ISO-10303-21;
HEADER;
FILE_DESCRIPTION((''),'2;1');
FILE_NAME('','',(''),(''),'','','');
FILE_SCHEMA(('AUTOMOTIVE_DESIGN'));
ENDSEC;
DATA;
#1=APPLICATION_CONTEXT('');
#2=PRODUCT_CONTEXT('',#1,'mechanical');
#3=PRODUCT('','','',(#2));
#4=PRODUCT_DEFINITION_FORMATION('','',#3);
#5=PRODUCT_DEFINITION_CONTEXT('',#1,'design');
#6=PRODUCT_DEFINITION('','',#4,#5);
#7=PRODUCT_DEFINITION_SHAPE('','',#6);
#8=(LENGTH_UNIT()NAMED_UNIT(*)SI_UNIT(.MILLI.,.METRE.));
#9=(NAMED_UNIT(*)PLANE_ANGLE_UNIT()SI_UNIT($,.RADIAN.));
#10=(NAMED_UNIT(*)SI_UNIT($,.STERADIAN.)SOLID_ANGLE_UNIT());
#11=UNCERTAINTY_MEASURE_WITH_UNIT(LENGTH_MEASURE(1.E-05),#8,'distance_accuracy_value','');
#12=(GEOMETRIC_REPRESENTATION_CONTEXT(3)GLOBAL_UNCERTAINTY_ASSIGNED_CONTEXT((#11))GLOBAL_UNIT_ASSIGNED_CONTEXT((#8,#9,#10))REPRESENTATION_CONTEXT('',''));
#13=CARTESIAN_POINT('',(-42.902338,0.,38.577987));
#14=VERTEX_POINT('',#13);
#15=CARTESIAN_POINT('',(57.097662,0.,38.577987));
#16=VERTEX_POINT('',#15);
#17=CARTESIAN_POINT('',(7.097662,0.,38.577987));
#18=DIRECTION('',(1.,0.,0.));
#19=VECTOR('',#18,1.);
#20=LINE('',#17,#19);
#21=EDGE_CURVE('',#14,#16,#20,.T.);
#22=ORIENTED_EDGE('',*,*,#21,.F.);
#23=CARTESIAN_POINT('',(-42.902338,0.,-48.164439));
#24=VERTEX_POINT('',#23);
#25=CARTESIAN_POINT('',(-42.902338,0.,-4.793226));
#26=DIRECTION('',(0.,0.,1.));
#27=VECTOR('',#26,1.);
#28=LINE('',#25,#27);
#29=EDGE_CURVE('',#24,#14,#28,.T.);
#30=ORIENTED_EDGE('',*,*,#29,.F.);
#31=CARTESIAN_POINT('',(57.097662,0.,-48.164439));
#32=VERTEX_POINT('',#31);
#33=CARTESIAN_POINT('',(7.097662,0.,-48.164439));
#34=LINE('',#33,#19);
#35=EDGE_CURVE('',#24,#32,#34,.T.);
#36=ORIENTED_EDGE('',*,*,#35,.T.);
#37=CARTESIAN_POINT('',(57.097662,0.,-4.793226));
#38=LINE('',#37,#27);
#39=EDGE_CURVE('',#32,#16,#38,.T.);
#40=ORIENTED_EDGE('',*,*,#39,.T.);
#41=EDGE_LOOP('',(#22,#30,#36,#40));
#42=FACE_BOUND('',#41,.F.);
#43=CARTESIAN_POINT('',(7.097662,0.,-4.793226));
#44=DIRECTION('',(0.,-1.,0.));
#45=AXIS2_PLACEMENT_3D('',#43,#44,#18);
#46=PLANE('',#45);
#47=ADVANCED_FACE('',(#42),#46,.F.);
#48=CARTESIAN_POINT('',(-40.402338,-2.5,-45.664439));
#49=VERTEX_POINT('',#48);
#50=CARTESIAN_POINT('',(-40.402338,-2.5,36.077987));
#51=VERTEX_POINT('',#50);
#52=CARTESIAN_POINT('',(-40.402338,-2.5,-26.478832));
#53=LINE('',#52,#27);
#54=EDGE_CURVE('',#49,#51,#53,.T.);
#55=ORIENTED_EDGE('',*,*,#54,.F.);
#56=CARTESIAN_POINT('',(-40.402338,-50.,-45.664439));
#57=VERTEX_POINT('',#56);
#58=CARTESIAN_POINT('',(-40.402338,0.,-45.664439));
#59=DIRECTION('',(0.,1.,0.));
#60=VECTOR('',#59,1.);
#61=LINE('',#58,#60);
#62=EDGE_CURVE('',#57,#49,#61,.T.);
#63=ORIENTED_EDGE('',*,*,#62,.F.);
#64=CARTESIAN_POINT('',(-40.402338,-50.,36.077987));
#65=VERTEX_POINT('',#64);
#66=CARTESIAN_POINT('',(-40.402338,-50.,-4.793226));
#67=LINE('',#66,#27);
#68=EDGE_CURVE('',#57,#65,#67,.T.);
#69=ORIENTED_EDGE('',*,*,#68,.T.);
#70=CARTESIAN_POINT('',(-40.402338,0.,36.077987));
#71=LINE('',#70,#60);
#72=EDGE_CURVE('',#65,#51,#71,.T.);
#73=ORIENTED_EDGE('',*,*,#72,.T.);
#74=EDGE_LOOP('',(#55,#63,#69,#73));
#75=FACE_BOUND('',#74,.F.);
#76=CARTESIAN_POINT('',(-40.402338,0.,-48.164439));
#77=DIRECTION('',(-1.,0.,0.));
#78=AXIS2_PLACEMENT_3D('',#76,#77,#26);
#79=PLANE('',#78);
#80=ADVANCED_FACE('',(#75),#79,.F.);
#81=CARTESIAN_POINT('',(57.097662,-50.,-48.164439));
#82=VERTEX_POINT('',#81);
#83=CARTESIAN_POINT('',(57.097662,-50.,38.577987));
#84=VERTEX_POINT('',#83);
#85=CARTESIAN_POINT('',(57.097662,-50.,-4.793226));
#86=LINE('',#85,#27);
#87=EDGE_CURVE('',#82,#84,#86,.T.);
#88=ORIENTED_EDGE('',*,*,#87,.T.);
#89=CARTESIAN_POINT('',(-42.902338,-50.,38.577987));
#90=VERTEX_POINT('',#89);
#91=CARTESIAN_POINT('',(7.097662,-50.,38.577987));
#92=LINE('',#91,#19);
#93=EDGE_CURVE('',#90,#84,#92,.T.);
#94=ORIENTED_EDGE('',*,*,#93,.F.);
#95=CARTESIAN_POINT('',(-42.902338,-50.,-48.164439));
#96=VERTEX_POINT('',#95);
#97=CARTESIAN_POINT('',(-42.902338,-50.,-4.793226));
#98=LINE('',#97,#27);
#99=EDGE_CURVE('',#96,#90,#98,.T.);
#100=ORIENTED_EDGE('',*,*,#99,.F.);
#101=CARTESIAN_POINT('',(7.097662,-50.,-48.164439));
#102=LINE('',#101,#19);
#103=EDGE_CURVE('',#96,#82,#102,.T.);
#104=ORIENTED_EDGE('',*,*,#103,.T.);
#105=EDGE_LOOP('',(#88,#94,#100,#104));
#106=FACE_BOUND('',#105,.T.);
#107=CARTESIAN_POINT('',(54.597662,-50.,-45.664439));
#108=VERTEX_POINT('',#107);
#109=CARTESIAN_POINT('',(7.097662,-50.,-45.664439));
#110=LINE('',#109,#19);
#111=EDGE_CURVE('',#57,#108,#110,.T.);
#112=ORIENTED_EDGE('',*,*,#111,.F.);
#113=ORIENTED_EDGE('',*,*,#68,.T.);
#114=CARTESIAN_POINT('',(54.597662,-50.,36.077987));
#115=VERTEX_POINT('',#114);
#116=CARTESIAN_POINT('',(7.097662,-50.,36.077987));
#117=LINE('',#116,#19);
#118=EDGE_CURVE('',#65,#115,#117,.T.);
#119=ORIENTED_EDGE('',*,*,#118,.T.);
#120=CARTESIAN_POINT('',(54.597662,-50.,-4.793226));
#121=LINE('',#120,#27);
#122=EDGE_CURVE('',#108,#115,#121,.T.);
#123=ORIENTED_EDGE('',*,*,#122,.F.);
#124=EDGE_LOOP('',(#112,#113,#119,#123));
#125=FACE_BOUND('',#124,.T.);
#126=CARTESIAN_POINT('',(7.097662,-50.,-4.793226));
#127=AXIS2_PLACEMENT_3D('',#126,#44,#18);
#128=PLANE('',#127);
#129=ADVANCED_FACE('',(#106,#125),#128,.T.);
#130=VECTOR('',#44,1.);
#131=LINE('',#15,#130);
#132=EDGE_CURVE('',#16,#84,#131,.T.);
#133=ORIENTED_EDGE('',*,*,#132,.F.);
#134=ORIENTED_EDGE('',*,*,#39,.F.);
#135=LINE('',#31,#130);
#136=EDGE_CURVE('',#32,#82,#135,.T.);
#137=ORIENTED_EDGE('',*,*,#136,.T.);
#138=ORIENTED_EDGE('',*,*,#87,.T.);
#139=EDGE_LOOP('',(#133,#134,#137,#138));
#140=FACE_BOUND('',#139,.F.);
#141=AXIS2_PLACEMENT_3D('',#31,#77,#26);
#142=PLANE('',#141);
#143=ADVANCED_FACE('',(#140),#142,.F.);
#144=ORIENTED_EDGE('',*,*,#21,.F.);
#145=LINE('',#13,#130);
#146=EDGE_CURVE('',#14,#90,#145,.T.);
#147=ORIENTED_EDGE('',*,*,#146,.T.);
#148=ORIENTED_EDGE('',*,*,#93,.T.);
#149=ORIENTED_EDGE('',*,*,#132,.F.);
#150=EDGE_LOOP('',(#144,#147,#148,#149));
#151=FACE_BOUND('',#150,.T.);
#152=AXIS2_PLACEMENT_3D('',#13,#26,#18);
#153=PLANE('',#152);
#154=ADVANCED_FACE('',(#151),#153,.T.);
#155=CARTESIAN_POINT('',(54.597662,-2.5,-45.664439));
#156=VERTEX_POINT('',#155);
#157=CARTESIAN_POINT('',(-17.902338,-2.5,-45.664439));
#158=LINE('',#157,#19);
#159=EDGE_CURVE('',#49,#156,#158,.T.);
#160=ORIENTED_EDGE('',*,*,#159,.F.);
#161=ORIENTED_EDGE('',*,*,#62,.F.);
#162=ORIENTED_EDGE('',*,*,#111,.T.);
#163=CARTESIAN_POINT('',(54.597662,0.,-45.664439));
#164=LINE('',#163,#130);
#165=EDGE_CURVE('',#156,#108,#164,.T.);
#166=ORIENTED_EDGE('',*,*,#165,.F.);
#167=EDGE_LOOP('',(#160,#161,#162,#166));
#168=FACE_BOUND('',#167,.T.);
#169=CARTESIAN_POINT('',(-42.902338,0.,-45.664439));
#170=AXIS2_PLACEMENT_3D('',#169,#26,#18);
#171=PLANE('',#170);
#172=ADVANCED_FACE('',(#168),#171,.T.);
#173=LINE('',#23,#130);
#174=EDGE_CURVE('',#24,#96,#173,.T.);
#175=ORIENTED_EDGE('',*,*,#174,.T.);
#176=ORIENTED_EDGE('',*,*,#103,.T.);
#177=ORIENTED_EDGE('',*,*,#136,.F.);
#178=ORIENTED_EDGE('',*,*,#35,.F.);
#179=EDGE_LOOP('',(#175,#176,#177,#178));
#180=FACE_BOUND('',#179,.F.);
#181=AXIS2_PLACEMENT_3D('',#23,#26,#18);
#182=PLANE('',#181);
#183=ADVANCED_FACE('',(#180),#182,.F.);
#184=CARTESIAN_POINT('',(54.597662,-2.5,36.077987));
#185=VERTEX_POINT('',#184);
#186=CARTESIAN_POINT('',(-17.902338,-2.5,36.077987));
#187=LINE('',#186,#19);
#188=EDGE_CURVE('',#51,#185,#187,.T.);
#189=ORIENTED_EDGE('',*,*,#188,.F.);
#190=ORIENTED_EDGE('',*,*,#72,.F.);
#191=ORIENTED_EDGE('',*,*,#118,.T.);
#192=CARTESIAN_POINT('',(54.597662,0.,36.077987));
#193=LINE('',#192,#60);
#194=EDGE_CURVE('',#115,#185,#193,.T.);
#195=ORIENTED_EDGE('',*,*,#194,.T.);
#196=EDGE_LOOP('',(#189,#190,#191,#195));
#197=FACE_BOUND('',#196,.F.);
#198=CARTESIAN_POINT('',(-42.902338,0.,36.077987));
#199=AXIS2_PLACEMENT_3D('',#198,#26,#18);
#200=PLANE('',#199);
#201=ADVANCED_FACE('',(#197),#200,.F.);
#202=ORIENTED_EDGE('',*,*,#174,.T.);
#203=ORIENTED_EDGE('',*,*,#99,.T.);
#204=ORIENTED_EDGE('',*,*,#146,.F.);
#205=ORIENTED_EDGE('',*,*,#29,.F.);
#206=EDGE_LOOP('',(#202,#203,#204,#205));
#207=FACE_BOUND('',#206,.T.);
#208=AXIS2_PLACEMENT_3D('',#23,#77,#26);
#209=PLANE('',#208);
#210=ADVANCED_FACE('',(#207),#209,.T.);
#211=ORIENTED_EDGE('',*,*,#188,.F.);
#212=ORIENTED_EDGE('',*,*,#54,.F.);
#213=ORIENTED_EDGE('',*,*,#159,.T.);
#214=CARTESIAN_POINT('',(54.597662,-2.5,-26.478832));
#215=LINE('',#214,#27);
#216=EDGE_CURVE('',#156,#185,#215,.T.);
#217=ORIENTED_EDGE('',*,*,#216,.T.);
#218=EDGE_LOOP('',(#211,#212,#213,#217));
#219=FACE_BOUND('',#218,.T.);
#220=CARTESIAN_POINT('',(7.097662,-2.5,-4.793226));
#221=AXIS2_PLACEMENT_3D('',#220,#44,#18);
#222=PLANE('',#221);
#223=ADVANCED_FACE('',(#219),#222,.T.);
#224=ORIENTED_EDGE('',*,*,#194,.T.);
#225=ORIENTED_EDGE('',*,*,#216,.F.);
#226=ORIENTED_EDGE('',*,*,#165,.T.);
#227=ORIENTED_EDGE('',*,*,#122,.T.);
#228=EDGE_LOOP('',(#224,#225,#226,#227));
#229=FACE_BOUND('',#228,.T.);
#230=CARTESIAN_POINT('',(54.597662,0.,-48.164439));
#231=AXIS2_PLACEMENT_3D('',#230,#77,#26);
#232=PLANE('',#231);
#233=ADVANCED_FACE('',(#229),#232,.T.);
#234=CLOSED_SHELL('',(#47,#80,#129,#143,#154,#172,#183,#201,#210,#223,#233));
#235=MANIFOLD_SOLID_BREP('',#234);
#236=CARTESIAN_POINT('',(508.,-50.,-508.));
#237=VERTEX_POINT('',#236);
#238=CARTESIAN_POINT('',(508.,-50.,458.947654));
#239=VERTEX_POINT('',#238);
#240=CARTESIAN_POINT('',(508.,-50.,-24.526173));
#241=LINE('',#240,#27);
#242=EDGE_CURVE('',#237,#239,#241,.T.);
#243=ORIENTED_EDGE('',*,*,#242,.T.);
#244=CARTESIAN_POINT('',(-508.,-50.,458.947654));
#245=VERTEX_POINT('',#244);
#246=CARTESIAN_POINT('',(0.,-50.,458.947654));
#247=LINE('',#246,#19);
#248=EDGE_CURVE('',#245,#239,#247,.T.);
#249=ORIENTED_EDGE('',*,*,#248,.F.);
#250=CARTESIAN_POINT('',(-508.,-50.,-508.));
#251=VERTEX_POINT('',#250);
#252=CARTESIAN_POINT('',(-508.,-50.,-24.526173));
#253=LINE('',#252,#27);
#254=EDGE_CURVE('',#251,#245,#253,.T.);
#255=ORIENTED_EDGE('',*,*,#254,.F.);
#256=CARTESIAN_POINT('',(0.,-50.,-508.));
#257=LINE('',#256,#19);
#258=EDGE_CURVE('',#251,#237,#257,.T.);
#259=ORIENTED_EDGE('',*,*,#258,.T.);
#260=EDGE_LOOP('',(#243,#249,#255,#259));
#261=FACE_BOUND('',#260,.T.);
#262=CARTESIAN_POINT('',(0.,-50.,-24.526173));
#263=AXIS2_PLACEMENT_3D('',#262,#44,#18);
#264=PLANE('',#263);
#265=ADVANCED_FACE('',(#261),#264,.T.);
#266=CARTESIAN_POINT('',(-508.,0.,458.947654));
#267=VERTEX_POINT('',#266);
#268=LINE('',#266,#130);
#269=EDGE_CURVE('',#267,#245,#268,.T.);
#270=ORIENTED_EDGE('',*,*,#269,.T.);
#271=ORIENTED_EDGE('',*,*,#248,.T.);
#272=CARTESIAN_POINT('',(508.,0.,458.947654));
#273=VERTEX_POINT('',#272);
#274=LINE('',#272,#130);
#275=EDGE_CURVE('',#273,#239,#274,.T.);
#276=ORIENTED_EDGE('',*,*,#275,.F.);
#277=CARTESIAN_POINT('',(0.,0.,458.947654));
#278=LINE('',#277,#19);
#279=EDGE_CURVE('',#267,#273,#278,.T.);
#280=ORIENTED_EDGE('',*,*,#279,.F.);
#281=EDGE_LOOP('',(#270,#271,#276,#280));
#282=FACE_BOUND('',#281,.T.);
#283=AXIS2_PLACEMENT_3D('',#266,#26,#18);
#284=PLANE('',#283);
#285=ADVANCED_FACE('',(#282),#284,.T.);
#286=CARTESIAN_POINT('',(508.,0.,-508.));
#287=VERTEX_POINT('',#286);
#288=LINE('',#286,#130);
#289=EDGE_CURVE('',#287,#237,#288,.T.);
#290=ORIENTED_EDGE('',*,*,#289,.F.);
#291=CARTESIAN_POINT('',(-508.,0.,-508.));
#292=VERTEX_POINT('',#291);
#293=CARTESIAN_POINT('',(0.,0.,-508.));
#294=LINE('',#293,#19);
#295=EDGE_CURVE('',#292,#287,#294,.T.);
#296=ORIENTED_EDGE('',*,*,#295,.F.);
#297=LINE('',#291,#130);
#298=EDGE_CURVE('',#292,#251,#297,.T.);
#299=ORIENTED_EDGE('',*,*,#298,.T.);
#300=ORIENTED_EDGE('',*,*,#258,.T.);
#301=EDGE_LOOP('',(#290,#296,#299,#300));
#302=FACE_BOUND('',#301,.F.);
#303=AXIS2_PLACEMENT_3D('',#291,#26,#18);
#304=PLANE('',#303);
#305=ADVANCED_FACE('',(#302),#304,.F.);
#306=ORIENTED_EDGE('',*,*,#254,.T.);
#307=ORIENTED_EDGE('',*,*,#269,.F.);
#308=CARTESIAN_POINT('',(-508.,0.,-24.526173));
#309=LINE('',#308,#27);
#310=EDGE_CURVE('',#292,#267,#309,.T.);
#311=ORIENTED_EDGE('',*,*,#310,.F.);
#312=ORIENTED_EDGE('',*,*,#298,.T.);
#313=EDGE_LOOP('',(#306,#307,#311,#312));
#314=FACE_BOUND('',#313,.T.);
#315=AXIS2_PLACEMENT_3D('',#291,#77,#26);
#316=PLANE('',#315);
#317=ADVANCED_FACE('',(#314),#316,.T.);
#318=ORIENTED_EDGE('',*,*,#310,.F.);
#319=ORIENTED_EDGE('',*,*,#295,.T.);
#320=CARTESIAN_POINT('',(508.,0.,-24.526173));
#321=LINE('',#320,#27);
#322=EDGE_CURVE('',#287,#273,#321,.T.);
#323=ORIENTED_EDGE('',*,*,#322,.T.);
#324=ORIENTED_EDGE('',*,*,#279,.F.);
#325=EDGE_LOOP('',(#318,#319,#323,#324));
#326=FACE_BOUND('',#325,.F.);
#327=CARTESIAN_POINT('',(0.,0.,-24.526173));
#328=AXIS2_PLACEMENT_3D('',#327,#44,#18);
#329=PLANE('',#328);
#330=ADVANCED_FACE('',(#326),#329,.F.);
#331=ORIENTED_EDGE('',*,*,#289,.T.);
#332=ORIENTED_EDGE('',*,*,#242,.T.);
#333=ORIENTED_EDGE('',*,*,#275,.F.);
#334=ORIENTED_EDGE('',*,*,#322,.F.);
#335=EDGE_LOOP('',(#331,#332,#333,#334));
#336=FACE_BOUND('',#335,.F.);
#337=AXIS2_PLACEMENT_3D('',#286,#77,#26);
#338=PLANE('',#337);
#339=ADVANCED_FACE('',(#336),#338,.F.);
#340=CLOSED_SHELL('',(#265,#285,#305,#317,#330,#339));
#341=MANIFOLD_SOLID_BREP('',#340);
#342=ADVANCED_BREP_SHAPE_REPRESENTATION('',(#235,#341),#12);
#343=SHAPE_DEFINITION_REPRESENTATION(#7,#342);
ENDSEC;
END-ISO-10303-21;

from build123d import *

# Parameters (mm, degrees)
F0_W     = 100
F0_H     = 86.7424257066
F2_DEPTH = 50
F1_W     = 1016
F1_H     = 966.9476541734
F3_T     = -2.5


# Not quite as in the source:
# - a feature names something its author has since deleted; it is built from what else it names


with BuildPart() as f2:
    # F0 (on Front) → F2 (new body)
    with BuildSketch(Plane.XZ):
        with Locations((7.0976624265, -4.7932257876)):
            Rectangle(F0_W, F0_H)
    extrude(amount=F2_DEPTH)

    # F3
    f3_openings = [f2.faces().sort_by_distance(p)[0] for p in [
        (7.097662, -50, -4.793226),
    ]]
    offset(amount=F3_T, openings=f3_openings)


with BuildPart() as f2b:
    # F1 (on face) → F2, piece 2 (new body)
    with BuildSketch(Plane.XZ):
        with Locations((0, -24.5261729133)):
            Rectangle(F1_W, F1_H)
    extrude(amount=F2_DEPTH)


solid = Compound([f2.part, f2b.part])
